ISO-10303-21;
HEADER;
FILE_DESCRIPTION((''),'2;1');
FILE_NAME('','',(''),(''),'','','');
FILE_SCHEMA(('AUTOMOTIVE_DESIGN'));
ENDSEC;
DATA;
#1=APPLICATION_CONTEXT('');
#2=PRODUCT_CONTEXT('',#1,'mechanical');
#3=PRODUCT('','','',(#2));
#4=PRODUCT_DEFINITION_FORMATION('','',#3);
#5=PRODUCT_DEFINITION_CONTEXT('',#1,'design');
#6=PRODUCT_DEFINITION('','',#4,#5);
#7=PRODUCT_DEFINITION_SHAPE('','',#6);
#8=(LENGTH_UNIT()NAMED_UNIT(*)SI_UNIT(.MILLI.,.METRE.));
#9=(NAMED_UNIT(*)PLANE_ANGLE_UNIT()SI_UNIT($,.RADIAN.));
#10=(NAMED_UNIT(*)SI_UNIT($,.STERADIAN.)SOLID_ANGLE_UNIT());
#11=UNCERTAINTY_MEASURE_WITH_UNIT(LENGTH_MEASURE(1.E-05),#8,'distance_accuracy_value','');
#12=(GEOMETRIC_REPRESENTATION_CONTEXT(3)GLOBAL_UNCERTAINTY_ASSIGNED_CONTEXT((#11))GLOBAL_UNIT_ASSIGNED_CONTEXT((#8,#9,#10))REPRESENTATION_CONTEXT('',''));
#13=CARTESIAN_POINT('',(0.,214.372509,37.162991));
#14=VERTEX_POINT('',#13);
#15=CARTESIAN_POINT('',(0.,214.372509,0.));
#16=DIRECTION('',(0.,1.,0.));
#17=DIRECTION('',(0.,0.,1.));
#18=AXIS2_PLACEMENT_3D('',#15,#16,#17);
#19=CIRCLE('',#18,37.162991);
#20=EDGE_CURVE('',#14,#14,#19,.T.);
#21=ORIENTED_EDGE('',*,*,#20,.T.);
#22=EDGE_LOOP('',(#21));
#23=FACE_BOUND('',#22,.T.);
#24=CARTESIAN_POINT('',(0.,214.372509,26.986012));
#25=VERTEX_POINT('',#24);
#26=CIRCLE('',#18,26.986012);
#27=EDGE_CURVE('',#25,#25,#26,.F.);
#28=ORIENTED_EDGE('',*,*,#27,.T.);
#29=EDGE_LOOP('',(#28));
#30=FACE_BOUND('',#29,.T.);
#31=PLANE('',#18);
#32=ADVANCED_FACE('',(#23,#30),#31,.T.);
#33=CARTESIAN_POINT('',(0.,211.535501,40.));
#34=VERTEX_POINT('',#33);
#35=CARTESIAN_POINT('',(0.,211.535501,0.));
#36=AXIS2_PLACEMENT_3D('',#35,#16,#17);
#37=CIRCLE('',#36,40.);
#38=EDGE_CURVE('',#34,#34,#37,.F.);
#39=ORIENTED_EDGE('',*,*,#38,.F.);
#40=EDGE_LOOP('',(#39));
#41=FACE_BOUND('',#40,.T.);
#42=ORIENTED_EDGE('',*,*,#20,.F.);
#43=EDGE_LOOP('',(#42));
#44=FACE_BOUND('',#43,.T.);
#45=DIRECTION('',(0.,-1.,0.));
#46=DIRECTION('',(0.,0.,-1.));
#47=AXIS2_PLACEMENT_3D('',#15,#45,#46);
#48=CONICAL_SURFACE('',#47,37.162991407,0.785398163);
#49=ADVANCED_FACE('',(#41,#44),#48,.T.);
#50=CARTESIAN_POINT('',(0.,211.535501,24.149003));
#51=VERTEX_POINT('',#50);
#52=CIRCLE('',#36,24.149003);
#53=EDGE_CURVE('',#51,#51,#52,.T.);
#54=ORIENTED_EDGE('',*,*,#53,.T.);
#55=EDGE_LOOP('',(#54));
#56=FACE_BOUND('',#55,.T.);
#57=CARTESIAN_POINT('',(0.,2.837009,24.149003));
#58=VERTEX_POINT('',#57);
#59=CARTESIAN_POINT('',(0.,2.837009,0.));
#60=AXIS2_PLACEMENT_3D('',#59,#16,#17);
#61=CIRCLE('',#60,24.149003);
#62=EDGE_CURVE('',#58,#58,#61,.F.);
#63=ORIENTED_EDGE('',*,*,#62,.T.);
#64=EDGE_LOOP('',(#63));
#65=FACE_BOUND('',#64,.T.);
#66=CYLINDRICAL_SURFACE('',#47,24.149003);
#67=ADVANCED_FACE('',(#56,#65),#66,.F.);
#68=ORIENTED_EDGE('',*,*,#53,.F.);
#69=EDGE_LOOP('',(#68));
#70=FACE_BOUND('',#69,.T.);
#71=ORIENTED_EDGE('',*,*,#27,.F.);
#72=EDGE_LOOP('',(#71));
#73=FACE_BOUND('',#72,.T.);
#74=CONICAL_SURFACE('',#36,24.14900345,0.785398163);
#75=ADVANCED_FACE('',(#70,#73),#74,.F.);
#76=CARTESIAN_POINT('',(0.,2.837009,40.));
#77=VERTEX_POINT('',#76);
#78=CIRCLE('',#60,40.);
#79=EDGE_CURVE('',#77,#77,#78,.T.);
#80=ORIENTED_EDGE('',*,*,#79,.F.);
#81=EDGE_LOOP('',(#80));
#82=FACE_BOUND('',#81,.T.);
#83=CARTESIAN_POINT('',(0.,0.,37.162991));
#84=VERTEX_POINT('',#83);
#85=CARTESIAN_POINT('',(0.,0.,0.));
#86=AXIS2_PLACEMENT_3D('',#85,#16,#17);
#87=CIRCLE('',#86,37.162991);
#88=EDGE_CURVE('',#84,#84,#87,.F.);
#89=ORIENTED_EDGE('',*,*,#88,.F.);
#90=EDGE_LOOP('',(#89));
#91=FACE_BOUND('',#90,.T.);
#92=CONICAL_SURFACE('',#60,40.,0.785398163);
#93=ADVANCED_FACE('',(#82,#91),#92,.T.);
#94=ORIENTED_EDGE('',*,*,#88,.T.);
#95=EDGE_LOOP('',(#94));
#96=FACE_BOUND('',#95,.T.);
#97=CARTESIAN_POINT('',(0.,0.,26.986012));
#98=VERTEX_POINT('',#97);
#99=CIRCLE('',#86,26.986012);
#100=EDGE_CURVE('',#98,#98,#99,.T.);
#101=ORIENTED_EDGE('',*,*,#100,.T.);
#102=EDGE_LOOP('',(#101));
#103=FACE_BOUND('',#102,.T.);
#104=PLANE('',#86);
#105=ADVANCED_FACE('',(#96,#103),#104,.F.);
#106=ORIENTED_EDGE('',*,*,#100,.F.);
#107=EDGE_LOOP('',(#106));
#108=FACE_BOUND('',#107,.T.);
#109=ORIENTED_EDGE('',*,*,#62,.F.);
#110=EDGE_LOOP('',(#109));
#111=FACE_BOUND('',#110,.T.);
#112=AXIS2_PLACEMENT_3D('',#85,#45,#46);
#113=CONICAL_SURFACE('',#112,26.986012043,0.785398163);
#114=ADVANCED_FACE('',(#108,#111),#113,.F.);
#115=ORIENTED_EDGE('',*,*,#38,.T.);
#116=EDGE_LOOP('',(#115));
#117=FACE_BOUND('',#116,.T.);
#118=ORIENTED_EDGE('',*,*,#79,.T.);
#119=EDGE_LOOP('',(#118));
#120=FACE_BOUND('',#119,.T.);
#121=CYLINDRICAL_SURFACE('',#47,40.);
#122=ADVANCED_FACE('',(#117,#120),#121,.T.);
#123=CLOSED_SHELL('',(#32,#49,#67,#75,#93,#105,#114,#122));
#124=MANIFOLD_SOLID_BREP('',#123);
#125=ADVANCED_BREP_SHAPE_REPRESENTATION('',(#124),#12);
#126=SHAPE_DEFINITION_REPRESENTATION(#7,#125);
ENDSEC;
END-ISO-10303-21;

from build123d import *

# Parameters (mm, degrees)
SKETCH1_R           = 40
BOSS_EXTRUDE1_DEPTH = 214.372509117
SKETCH2_R           = 24.14900345
CUT_EXTRUDE1_DEPTH  = 222.710560563
CHAMFER1_SIZE       = 2.837008593


with BuildPart() as part:
    # Sketch1 → Boss-Extrude1 (new body)
    with BuildSketch(Plane(origin=(0, 0, 0), x_dir=(1, 0, 0), z_dir=(0, 1, 0))):
        Circle(SKETCH1_R)
    extrude(amount=BOSS_EXTRUDE1_DEPTH)

    # Sketch2 → Cut-Extrude1 (cut, through all)
    with BuildSketch(Plane(origin=(0, 0, 0), x_dir=(1, 0, 0), z_dir=(0, 1, 0))):
        Circle(SKETCH2_R)
    extrude(amount=CUT_EXTRUDE1_DEPTH, mode=Mode.SUBTRACT)

    # Chamfer1
    chamfer1_edges = [part.edges().sort_by_distance(p)[0] for p in [
        (-24.14900345, 214.372509117, 0),
        (-24.14900345, 0, 0),
        (-40, 0, 0),
        (-40, 214.372509117, 0),
    ]]
    chamfer(chamfer1_edges, length=CHAMFER1_SIZE)


solid = part.part
